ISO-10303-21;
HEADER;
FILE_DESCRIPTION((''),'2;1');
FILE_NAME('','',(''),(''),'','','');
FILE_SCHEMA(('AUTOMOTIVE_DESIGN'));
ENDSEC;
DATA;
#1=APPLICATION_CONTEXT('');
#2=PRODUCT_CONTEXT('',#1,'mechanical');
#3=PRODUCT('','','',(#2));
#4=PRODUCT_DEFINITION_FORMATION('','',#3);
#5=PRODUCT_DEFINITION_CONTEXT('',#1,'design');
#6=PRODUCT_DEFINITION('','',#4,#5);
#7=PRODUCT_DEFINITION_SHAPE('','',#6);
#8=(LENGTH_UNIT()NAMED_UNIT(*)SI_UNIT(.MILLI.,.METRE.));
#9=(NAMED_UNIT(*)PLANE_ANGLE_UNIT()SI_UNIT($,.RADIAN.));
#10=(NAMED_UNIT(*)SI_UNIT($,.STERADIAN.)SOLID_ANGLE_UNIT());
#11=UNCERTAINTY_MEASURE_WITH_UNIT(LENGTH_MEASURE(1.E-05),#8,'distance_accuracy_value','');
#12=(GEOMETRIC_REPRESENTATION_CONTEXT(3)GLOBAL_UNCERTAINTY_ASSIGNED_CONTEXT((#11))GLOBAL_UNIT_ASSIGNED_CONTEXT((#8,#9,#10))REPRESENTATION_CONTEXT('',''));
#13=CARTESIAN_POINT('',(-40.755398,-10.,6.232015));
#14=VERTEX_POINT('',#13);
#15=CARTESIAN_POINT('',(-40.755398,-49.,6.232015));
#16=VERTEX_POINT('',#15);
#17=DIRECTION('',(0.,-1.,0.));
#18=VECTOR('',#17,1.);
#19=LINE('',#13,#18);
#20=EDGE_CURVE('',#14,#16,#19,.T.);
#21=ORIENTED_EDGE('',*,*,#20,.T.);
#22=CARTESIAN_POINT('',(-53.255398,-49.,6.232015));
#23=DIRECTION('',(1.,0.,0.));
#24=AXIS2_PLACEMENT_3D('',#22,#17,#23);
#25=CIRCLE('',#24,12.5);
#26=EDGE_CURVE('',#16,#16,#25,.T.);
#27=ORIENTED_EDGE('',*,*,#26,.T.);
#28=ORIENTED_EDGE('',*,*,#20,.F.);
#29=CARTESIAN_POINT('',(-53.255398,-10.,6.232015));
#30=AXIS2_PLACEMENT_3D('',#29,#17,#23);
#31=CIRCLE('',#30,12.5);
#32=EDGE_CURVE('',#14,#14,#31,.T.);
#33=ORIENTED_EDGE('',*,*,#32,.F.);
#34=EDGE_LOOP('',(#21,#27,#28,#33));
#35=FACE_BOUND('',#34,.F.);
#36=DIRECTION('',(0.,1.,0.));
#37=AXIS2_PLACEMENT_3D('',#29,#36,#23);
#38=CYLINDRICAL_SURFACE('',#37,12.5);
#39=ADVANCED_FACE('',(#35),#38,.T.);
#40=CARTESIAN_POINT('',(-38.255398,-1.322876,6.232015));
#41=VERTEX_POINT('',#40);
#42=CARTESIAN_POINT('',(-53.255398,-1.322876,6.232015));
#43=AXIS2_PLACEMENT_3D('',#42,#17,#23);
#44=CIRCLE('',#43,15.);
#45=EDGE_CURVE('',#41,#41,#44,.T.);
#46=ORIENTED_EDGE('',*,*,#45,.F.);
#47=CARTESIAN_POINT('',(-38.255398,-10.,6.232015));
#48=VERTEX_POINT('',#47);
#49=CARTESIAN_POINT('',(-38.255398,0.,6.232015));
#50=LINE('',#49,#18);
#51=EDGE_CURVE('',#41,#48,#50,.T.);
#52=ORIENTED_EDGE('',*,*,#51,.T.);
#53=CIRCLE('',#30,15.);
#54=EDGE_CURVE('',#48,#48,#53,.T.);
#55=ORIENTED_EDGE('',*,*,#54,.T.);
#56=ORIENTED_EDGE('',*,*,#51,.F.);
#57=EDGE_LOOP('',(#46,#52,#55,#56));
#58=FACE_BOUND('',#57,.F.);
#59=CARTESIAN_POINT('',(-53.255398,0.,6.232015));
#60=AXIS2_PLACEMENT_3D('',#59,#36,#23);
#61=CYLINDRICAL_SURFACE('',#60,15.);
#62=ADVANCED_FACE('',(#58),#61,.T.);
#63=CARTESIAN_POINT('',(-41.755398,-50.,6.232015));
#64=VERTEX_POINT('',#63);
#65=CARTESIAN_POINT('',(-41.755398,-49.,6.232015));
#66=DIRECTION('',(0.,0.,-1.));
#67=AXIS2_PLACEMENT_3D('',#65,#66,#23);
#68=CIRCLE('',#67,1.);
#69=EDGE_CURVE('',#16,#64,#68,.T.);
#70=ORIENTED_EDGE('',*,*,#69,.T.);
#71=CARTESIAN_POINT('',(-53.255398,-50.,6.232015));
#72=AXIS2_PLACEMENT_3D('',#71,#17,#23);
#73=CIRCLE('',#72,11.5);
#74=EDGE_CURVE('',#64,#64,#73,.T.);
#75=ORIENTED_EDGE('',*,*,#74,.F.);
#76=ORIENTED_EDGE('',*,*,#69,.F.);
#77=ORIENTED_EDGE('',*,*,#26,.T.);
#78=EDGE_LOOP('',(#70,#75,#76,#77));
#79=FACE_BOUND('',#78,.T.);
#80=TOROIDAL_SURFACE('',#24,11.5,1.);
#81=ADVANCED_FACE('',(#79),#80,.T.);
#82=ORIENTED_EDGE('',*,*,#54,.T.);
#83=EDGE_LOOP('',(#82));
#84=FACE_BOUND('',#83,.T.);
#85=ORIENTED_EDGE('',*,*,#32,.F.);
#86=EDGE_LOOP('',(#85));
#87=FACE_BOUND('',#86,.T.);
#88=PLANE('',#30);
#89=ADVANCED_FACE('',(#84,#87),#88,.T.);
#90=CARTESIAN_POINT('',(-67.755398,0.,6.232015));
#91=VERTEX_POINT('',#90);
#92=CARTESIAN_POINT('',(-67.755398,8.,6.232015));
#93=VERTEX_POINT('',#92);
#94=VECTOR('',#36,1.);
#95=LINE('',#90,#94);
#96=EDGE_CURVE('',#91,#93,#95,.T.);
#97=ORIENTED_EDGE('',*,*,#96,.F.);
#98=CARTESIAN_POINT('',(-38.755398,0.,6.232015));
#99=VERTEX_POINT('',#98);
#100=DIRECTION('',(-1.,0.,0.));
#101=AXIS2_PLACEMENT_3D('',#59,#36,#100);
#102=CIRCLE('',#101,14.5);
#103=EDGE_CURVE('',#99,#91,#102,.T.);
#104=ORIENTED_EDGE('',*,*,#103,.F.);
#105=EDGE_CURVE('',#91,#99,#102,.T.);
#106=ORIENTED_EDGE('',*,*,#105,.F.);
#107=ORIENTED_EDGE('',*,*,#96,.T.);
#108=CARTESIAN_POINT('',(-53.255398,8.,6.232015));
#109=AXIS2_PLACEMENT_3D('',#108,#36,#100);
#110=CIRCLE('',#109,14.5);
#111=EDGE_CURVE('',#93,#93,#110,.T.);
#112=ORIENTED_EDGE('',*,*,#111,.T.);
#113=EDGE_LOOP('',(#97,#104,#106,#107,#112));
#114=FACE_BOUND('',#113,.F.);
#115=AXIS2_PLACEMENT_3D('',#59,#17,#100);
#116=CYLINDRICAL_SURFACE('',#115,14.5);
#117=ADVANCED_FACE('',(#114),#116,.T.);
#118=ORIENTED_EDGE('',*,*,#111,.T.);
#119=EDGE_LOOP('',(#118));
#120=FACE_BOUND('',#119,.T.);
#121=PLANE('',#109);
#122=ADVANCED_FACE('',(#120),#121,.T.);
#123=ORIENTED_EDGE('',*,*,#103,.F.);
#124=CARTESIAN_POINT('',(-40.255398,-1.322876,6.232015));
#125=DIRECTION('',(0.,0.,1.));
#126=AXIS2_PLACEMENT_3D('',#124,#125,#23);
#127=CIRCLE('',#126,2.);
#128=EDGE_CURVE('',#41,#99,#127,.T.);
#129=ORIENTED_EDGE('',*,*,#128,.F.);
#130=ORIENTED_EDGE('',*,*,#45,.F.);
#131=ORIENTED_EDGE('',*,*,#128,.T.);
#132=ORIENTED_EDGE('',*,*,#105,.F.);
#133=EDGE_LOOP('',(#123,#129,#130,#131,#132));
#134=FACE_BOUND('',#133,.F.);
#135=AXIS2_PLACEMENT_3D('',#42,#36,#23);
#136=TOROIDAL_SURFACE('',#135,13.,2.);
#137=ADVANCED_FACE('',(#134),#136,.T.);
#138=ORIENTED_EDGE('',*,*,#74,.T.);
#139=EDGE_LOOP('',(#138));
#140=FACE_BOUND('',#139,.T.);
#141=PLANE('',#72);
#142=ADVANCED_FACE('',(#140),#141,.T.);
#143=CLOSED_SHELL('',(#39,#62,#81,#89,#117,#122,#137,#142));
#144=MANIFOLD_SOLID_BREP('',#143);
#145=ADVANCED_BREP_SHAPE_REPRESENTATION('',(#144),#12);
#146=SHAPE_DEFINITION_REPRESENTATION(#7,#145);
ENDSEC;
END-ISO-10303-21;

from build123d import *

# Parameters (mm, degrees)
F0_R     = 15
F1_DEPTH = 10
F2_R     = 12.5
F3_DEPTH = 40
F4_R     = 1
F5_R     = 14.5
F6_DEPTH = 8


# Not quite as in the source:
# - a fillet or chamfer that OpenCascade refuses, or shapes differently, is made with other operations: its cross-section is extruded or revolved along the edge and cut away or added


with BuildPart() as f1:
    # F0 (on Front) → F1 (new body)
    with BuildSketch(Plane.XZ):
        with Locations((-53.2553978264, 6.2320148572)):
            Circle(F0_R)
    extrude(amount=F1_DEPTH)

    # F2 (on face) → F3 (join)
    with BuildSketch(Plane.XZ.offset(10)):
        with Locations((-53.2553978264, 6.2320148572)):
            Circle(F2_R)
    extrude(amount=F3_DEPTH)

    # F4
    f4_edges = [f1.edges().sort_by_distance(p)[0] for p in [
        (-65.755398, -50, 6.232015),
    ]]
    fillet(f4_edges, radius=F4_R)

    # F5 (on face) → F6 (join)
    with BuildSketch(Plane(origin=(0, 0, 0), x_dir=(-1, 0, 0), z_dir=(0, 1, 0))):
        with Locations((53.2553978264, 6.2320148572)):
            Circle(F5_R)
    extrude(amount=F6_DEPTH)

    # F7: fillet of radius 2 on 1 edges, made by hand

    # F7_s1 → F7_t2 (revolve, cut)
    with BuildSketch(Plane.XY.offset(6.2320148572)):
        with BuildLine():
            ThreePointArc((-38.2553978264, -1.3228756555), (-38.384569133, -0.6157688743), (-38.7553978264, 0))
            Line((-38.7553978264, 0), (-38.2553978264, 0))
            Line((-38.2553978264, 0), (-38.2553978264, -1.3228756555))
        make_face()
    revolve(axis=Axis((-53.2553978264, 0, 6.2320148572), (0, -1, 0)), mode=Mode.SUBTRACT)


solid = f1.part
